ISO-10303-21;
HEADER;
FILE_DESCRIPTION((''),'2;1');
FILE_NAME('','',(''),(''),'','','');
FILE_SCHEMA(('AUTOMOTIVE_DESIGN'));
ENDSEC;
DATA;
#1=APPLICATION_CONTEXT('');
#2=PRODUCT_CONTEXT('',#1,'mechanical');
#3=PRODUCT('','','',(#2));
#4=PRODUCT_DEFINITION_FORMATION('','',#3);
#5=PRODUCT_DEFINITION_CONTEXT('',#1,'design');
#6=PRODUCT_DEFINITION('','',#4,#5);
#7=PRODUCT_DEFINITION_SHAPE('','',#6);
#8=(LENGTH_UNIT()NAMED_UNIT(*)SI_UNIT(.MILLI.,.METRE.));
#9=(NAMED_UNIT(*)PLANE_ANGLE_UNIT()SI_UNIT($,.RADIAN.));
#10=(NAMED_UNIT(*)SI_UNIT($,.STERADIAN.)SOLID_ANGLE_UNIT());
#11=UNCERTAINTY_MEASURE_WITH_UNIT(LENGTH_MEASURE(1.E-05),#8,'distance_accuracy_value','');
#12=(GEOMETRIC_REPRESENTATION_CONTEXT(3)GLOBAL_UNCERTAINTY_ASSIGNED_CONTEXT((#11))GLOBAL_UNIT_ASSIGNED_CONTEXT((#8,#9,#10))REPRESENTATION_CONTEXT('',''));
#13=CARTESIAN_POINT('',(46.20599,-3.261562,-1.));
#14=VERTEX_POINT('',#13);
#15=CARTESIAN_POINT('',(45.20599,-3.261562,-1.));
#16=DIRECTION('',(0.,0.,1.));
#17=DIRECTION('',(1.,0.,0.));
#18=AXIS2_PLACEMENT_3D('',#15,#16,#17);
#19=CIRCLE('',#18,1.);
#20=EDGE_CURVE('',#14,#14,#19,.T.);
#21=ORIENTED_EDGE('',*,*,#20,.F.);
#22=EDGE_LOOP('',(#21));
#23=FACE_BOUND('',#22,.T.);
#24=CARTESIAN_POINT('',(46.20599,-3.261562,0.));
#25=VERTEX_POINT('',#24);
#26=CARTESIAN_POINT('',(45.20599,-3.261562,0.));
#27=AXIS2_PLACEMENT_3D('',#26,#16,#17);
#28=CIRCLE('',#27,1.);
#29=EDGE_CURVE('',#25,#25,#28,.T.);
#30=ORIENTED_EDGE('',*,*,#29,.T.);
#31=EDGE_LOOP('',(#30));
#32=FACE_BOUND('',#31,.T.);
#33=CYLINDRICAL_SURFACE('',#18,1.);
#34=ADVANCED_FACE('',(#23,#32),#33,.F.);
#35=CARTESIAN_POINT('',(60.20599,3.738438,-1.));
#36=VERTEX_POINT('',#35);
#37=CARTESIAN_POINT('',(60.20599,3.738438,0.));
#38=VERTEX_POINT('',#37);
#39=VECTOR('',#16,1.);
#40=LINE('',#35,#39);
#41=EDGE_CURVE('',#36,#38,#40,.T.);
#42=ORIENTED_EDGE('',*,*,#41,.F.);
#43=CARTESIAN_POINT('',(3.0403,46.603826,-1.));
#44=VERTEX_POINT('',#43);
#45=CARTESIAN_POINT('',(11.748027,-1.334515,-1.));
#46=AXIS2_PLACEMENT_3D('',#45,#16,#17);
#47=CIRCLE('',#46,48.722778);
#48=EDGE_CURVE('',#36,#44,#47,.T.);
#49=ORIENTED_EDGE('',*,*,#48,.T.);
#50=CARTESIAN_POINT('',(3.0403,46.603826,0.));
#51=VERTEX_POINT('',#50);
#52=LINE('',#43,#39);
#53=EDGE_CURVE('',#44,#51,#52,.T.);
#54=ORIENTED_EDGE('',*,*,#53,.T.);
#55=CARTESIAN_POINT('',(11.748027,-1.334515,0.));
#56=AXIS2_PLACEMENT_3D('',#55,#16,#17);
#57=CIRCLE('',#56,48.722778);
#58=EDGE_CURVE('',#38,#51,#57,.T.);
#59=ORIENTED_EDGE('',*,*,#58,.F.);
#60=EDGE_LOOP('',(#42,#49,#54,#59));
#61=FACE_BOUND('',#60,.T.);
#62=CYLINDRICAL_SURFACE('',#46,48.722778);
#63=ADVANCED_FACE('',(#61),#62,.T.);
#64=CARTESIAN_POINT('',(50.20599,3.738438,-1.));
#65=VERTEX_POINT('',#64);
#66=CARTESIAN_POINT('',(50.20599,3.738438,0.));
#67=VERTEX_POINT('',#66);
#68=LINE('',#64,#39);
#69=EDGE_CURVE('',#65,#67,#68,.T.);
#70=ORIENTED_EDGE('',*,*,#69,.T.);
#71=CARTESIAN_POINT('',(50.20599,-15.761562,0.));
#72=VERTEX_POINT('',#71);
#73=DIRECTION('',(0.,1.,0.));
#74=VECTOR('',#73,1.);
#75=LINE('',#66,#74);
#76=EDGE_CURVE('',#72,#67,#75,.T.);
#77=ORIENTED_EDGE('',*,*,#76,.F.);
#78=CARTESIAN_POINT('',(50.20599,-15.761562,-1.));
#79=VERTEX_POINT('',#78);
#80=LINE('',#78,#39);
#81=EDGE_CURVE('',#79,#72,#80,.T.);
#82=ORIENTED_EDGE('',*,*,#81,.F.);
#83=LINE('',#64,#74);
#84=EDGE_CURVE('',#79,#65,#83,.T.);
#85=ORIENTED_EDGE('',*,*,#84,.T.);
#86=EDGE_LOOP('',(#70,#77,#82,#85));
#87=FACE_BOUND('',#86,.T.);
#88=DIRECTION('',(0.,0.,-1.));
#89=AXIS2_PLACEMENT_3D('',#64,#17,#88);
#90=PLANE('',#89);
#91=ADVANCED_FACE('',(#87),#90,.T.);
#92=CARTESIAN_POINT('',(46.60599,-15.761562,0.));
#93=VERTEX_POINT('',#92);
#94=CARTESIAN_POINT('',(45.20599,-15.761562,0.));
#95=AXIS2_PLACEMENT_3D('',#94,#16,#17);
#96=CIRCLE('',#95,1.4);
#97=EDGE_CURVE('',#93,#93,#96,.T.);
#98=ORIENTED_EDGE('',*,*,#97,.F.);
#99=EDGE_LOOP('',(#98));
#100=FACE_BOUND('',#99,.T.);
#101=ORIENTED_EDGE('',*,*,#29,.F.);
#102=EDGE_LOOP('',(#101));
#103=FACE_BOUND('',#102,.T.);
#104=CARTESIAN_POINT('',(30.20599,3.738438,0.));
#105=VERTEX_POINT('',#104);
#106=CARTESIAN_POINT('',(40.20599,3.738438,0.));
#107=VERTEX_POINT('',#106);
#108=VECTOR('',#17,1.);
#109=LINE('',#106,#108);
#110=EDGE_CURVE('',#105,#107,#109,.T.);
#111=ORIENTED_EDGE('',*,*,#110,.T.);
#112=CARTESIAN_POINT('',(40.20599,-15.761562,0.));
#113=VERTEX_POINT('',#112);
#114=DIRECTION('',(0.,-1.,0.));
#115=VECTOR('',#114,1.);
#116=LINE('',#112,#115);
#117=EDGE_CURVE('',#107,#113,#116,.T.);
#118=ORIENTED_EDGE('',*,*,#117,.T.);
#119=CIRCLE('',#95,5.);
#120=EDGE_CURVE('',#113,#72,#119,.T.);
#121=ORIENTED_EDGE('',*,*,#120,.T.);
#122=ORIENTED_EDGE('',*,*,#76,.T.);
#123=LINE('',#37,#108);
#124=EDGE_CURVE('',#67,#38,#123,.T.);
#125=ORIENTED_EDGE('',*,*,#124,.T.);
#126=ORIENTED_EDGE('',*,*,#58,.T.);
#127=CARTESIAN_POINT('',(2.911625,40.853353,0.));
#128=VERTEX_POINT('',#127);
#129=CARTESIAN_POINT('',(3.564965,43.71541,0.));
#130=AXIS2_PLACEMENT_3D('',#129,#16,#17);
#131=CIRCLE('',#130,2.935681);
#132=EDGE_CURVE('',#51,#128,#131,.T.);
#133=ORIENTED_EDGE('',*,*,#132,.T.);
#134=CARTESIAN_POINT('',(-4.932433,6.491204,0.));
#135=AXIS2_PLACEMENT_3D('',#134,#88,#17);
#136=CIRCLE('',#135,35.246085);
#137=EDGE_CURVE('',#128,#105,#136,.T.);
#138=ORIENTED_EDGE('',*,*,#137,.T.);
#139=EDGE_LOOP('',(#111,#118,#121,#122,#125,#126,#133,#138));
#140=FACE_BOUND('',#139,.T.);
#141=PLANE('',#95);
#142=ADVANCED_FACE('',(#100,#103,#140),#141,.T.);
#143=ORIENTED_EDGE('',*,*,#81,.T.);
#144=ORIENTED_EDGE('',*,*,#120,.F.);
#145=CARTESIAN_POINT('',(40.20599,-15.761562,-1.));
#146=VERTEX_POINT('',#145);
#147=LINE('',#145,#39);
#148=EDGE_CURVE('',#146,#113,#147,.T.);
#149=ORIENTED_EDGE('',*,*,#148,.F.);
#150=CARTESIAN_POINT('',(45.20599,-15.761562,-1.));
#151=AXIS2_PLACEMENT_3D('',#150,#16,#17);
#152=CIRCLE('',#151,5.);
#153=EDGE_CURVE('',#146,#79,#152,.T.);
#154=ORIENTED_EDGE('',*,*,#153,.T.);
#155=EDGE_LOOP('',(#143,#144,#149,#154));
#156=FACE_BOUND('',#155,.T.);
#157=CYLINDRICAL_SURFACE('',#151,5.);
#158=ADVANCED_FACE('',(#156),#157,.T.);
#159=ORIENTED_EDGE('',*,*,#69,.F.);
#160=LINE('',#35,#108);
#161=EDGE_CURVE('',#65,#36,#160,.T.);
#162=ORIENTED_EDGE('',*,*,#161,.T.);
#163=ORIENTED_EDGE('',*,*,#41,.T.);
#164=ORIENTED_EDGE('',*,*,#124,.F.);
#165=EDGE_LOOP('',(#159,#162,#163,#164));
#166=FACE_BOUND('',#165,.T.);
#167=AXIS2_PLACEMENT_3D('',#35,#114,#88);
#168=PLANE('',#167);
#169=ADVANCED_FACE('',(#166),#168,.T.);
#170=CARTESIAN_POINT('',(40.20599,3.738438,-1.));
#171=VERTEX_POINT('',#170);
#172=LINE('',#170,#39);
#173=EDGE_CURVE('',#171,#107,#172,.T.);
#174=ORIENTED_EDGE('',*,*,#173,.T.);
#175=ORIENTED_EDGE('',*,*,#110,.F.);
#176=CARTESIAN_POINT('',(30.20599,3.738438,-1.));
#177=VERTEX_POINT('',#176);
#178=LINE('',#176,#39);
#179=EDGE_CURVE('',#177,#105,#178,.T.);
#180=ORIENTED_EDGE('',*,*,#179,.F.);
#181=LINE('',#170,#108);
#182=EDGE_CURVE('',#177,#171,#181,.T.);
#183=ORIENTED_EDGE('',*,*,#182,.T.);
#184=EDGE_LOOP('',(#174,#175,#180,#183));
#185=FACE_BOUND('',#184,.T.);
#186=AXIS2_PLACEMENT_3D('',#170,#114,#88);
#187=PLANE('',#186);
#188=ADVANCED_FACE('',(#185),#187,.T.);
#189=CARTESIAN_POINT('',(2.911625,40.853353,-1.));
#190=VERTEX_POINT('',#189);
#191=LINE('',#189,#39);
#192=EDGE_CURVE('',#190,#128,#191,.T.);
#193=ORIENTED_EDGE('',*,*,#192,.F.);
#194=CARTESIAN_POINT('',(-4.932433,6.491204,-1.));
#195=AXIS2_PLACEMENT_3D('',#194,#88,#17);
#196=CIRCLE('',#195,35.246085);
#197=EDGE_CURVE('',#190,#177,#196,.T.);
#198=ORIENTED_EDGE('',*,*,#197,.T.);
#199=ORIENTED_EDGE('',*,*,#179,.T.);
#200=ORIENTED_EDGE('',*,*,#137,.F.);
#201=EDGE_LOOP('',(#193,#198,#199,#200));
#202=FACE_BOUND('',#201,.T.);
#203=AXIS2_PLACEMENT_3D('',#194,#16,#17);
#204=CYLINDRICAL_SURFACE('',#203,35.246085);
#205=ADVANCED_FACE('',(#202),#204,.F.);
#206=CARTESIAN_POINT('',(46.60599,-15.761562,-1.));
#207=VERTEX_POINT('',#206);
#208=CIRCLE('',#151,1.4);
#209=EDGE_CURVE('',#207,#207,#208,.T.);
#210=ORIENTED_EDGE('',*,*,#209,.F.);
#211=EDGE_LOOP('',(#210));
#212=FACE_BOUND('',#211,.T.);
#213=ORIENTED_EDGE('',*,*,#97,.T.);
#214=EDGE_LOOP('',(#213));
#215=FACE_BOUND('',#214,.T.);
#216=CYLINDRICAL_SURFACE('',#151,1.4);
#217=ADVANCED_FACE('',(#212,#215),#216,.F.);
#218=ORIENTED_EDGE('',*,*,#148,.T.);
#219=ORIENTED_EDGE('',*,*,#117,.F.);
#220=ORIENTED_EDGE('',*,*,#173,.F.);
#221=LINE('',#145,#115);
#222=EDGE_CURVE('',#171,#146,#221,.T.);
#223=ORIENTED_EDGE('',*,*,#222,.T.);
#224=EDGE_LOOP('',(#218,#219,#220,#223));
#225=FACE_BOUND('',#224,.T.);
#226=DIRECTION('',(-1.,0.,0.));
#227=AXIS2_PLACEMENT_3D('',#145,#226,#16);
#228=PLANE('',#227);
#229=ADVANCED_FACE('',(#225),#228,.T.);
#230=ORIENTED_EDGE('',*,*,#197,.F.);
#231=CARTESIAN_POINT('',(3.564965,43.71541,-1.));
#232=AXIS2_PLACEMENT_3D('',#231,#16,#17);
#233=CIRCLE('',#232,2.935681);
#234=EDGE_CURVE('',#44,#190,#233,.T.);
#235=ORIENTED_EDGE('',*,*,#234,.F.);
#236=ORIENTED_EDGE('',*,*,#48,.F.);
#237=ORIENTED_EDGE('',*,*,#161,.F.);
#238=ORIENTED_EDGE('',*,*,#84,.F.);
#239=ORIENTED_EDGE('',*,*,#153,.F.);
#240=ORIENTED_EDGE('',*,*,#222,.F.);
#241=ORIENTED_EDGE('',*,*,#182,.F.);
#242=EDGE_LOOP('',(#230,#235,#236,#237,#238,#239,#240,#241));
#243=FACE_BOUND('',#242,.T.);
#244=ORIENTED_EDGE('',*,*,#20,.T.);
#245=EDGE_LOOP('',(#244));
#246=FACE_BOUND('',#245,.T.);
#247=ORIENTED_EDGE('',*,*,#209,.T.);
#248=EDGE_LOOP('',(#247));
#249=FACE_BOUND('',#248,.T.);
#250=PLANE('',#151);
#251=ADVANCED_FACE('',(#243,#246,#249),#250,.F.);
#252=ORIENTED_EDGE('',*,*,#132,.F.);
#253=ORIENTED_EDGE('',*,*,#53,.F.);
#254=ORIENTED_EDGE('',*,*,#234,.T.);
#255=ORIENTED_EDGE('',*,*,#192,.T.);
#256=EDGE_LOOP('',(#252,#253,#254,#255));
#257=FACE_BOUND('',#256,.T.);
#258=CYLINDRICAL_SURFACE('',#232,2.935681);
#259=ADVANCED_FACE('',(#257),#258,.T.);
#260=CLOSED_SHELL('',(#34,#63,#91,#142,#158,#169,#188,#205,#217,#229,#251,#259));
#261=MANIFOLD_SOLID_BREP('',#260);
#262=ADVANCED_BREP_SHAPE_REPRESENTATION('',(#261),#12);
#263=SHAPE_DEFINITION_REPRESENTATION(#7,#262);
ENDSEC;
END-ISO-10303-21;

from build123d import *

# Parameters (mm, degrees)
MODEL_R           = 1.4
MODEL_R_2         = 1
BRIDA_BASE1_DEPTH = 1


# Sheet-metal steps are written as plain solids
with BuildPart() as part:
    # Model → Brida base1 (new body)
    with BuildSketch(Plane.XY):
        with BuildLine():
            Line((60.2059904, 3.7384384), (50.2059904, 3.7384384))
            Line((50.2059904, 3.7384384), (50.2059904, -15.7615616))
            ThreePointArc((50.2059904, -15.7615616), (45.2059904, -20.7615616), (40.2059904, -15.7615616))
            Line((40.2059904, -15.7615616), (40.2059904, 3.7384384))
            Line((40.2059904, 3.7384384), (30.2059904, 3.7384384))
            ThreePointArc((30.2059904, 3.7384384), (23.46215545, 27.372628124), (2.911625265, 40.853352987))
            ThreePointArc((2.911625265, 40.853352987), (0.630018379, 43.781083427), (3.040300155, 46.603826289))
            ThreePointArc((3.040300155, 46.603826289), (40.977818177, 37.646613371), (60.2059904, 3.7384384))
        make_face()
        with Locations((45.2059904, -15.7615616)):
            Circle(MODEL_R, mode=Mode.SUBTRACT)
        with Locations((45.2059904, -3.2615616)):
            Circle(MODEL_R_2, mode=Mode.SUBTRACT)
    extrude(amount=-BRIDA_BASE1_DEPTH)


solid = part.part
